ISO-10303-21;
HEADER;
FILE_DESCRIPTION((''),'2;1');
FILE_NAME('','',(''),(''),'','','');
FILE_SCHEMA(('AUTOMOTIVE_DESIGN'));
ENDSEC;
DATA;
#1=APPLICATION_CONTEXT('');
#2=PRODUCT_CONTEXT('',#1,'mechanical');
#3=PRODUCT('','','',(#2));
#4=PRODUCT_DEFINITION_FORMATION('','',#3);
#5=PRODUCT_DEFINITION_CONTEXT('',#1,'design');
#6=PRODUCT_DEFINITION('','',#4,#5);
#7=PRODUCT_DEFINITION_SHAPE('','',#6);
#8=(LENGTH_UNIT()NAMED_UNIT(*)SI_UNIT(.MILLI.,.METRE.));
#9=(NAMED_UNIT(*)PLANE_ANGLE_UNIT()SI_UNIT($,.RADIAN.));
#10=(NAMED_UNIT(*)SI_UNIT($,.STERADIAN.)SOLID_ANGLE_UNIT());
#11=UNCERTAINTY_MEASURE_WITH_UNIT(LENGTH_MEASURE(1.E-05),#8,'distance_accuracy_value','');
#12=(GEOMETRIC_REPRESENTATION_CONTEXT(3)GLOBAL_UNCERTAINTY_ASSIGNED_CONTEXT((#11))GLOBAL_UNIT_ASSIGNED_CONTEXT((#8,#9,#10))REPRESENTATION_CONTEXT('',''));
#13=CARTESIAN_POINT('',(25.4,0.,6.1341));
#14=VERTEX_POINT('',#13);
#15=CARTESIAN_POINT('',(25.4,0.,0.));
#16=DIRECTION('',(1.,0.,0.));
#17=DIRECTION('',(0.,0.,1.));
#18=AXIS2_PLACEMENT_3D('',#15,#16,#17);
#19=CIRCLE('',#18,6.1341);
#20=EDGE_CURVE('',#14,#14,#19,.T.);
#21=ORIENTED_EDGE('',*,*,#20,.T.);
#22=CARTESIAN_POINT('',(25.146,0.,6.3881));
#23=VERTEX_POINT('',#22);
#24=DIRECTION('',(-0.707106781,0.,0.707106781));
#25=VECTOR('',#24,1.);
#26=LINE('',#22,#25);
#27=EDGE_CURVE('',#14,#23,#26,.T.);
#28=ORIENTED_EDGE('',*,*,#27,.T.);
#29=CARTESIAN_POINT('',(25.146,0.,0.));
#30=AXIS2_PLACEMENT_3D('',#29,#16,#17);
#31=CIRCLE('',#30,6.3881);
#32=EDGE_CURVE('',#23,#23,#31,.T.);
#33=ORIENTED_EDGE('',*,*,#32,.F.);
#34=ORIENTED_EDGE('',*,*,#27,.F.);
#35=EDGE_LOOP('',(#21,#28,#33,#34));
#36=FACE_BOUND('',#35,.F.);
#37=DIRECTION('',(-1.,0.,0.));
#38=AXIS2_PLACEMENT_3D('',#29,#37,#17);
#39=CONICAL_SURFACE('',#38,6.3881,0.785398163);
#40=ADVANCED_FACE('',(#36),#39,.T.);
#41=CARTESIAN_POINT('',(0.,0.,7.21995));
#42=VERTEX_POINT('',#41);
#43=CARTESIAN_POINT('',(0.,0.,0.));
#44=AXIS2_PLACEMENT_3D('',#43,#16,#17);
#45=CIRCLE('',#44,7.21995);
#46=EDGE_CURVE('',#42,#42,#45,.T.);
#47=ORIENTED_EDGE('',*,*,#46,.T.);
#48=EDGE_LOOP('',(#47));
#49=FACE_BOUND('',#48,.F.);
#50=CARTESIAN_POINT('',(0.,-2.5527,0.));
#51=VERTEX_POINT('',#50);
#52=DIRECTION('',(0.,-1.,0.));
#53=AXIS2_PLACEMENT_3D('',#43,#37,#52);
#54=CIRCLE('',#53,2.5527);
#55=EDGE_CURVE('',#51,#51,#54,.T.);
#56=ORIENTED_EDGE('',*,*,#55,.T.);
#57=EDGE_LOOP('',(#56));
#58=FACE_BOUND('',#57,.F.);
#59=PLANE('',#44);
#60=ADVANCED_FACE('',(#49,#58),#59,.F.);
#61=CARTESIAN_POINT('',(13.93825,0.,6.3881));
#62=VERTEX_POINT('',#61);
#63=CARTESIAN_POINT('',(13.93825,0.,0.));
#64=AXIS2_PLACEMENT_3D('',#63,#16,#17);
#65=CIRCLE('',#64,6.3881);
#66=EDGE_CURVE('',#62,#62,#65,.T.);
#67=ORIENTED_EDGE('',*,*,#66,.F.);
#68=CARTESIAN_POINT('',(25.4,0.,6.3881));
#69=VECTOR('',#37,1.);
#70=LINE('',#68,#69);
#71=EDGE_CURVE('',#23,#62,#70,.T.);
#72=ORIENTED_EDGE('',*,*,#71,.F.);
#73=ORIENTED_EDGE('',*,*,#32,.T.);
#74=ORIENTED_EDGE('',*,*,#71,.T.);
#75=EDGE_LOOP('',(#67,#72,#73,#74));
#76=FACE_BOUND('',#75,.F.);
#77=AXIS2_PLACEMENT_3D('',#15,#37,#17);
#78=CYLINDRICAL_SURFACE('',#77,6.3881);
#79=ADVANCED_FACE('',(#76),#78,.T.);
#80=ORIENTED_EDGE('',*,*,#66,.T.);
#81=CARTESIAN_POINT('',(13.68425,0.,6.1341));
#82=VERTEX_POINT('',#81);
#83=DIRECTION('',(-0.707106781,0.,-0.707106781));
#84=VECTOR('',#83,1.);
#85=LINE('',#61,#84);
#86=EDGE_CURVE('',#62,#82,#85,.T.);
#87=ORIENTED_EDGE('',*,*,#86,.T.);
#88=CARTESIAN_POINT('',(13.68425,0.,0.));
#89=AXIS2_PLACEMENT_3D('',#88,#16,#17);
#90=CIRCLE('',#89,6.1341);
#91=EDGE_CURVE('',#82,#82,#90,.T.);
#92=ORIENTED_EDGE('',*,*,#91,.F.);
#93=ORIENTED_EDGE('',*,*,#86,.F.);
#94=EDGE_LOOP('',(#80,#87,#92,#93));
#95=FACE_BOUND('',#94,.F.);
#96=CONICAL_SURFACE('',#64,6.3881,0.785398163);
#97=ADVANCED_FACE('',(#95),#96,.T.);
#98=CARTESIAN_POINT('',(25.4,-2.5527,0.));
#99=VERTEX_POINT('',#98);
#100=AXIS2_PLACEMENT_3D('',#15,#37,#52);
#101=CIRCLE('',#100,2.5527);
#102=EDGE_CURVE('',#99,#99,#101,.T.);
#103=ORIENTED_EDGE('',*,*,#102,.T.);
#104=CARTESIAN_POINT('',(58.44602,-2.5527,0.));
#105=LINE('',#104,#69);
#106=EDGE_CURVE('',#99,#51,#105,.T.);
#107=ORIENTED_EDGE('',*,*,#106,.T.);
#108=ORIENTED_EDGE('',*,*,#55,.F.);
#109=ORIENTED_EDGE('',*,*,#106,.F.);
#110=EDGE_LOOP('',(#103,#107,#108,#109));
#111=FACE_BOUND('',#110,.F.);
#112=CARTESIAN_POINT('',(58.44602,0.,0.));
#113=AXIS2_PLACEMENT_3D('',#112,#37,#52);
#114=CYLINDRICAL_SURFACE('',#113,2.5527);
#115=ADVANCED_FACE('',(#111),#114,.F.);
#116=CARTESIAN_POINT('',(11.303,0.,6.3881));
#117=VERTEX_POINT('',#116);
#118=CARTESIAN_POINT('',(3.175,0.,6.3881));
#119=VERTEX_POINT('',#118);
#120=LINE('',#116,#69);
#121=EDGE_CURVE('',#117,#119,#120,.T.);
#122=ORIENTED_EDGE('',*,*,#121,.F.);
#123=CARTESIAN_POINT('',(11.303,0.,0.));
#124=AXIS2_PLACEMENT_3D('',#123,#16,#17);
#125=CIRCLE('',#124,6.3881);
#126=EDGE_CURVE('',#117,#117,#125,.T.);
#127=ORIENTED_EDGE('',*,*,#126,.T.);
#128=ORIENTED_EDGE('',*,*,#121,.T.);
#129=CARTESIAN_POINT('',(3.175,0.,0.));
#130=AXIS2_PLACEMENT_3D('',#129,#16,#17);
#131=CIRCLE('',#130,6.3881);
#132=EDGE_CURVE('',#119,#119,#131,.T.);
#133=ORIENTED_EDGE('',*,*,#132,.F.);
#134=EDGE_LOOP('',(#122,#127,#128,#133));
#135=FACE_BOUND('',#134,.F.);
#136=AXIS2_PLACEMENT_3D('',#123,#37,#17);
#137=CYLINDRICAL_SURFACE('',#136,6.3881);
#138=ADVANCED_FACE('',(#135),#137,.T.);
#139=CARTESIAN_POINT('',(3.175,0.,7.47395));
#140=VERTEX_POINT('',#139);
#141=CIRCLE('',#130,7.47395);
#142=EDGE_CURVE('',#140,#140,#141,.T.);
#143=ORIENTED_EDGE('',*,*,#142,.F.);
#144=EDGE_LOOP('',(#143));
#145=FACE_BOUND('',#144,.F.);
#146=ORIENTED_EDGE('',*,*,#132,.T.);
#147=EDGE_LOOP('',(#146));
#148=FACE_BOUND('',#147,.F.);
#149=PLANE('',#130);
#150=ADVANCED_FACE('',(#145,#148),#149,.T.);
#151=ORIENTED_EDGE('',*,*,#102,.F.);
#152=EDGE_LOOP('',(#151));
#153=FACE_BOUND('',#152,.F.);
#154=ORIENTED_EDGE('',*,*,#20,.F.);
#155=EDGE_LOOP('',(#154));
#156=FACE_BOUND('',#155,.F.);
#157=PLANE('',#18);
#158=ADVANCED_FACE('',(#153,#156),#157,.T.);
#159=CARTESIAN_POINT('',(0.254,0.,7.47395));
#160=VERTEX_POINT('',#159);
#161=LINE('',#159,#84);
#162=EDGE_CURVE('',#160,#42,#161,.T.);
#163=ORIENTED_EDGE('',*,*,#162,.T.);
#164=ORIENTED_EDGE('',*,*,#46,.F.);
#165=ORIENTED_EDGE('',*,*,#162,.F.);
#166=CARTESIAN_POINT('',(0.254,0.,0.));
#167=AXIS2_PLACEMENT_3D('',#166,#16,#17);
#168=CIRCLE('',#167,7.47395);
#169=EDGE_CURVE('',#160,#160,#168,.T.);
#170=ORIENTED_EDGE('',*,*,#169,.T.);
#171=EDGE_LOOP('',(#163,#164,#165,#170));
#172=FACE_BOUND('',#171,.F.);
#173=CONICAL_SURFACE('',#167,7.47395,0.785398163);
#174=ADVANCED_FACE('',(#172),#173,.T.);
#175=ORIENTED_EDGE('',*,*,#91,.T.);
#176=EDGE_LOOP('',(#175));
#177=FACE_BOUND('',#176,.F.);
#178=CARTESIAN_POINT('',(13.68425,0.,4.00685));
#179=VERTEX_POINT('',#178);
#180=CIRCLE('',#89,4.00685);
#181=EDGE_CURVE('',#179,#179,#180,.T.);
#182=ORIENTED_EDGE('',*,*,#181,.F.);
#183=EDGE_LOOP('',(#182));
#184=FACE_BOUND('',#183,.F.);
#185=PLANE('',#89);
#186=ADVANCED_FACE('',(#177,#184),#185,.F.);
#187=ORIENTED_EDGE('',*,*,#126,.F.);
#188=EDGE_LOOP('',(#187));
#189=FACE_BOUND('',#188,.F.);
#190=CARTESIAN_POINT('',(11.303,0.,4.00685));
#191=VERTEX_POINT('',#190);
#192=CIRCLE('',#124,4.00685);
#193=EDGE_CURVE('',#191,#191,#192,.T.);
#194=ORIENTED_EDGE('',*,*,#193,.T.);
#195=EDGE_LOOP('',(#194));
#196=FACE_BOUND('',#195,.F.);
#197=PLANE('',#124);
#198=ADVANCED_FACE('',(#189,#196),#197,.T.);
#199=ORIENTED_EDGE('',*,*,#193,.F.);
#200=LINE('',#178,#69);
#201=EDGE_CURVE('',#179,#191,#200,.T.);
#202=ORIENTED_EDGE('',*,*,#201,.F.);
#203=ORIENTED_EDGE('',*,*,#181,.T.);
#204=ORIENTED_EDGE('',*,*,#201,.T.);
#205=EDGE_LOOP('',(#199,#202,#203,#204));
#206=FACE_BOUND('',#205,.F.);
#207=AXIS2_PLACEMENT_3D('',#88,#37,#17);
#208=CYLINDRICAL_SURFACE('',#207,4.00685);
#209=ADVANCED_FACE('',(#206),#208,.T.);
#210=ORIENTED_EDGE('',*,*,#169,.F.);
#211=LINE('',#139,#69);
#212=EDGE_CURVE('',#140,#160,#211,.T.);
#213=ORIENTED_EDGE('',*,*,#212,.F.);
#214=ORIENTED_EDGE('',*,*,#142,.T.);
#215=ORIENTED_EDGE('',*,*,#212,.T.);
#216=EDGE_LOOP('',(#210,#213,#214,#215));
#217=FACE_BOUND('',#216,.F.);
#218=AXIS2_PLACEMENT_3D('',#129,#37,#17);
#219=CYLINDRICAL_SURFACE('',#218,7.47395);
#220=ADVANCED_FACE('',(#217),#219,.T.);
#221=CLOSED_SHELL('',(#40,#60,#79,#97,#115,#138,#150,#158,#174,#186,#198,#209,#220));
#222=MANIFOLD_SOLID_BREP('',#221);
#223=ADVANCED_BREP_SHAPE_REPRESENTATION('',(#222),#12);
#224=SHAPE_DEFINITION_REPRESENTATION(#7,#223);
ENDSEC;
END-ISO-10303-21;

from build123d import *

# Parameters (mm, degrees)
F2_SIZE = 0.254
F4_D    = 5.1054


with BuildPart() as f1:
    # F0 (on Front) → F1 (revolve)
    with BuildSketch(Plane.XZ):
        Polygon((11.303, 6.3881), (3.175, 6.3881), (3.175, 7.47395), (0, 7.47395), (0, 0), (22.86, 0), (25.4, 0), (25.4, 6.3881), (13.68425, 6.3881), (13.68425, 4.00685), (11.303, 4.00685), align=None)
    revolve(axis=Axis((11.43, 0, 0), (1, 0, 0)))

    # F2
    f2_edges = [f1.edges().sort_by_distance(p)[0] for p in [
        (0, 0, -7.47395),
        (25.4, 0, -6.3881),
        (13.68425, 0, -6.3881),
    ]]
    chamfer(f2_edges, length=F2_SIZE)

    # F4 (through all)
    with Locations(Plane.YZ.offset(25.4)):
        with Locations((0, 0)):
            Hole(F4_D / 2)


solid = f1.part
